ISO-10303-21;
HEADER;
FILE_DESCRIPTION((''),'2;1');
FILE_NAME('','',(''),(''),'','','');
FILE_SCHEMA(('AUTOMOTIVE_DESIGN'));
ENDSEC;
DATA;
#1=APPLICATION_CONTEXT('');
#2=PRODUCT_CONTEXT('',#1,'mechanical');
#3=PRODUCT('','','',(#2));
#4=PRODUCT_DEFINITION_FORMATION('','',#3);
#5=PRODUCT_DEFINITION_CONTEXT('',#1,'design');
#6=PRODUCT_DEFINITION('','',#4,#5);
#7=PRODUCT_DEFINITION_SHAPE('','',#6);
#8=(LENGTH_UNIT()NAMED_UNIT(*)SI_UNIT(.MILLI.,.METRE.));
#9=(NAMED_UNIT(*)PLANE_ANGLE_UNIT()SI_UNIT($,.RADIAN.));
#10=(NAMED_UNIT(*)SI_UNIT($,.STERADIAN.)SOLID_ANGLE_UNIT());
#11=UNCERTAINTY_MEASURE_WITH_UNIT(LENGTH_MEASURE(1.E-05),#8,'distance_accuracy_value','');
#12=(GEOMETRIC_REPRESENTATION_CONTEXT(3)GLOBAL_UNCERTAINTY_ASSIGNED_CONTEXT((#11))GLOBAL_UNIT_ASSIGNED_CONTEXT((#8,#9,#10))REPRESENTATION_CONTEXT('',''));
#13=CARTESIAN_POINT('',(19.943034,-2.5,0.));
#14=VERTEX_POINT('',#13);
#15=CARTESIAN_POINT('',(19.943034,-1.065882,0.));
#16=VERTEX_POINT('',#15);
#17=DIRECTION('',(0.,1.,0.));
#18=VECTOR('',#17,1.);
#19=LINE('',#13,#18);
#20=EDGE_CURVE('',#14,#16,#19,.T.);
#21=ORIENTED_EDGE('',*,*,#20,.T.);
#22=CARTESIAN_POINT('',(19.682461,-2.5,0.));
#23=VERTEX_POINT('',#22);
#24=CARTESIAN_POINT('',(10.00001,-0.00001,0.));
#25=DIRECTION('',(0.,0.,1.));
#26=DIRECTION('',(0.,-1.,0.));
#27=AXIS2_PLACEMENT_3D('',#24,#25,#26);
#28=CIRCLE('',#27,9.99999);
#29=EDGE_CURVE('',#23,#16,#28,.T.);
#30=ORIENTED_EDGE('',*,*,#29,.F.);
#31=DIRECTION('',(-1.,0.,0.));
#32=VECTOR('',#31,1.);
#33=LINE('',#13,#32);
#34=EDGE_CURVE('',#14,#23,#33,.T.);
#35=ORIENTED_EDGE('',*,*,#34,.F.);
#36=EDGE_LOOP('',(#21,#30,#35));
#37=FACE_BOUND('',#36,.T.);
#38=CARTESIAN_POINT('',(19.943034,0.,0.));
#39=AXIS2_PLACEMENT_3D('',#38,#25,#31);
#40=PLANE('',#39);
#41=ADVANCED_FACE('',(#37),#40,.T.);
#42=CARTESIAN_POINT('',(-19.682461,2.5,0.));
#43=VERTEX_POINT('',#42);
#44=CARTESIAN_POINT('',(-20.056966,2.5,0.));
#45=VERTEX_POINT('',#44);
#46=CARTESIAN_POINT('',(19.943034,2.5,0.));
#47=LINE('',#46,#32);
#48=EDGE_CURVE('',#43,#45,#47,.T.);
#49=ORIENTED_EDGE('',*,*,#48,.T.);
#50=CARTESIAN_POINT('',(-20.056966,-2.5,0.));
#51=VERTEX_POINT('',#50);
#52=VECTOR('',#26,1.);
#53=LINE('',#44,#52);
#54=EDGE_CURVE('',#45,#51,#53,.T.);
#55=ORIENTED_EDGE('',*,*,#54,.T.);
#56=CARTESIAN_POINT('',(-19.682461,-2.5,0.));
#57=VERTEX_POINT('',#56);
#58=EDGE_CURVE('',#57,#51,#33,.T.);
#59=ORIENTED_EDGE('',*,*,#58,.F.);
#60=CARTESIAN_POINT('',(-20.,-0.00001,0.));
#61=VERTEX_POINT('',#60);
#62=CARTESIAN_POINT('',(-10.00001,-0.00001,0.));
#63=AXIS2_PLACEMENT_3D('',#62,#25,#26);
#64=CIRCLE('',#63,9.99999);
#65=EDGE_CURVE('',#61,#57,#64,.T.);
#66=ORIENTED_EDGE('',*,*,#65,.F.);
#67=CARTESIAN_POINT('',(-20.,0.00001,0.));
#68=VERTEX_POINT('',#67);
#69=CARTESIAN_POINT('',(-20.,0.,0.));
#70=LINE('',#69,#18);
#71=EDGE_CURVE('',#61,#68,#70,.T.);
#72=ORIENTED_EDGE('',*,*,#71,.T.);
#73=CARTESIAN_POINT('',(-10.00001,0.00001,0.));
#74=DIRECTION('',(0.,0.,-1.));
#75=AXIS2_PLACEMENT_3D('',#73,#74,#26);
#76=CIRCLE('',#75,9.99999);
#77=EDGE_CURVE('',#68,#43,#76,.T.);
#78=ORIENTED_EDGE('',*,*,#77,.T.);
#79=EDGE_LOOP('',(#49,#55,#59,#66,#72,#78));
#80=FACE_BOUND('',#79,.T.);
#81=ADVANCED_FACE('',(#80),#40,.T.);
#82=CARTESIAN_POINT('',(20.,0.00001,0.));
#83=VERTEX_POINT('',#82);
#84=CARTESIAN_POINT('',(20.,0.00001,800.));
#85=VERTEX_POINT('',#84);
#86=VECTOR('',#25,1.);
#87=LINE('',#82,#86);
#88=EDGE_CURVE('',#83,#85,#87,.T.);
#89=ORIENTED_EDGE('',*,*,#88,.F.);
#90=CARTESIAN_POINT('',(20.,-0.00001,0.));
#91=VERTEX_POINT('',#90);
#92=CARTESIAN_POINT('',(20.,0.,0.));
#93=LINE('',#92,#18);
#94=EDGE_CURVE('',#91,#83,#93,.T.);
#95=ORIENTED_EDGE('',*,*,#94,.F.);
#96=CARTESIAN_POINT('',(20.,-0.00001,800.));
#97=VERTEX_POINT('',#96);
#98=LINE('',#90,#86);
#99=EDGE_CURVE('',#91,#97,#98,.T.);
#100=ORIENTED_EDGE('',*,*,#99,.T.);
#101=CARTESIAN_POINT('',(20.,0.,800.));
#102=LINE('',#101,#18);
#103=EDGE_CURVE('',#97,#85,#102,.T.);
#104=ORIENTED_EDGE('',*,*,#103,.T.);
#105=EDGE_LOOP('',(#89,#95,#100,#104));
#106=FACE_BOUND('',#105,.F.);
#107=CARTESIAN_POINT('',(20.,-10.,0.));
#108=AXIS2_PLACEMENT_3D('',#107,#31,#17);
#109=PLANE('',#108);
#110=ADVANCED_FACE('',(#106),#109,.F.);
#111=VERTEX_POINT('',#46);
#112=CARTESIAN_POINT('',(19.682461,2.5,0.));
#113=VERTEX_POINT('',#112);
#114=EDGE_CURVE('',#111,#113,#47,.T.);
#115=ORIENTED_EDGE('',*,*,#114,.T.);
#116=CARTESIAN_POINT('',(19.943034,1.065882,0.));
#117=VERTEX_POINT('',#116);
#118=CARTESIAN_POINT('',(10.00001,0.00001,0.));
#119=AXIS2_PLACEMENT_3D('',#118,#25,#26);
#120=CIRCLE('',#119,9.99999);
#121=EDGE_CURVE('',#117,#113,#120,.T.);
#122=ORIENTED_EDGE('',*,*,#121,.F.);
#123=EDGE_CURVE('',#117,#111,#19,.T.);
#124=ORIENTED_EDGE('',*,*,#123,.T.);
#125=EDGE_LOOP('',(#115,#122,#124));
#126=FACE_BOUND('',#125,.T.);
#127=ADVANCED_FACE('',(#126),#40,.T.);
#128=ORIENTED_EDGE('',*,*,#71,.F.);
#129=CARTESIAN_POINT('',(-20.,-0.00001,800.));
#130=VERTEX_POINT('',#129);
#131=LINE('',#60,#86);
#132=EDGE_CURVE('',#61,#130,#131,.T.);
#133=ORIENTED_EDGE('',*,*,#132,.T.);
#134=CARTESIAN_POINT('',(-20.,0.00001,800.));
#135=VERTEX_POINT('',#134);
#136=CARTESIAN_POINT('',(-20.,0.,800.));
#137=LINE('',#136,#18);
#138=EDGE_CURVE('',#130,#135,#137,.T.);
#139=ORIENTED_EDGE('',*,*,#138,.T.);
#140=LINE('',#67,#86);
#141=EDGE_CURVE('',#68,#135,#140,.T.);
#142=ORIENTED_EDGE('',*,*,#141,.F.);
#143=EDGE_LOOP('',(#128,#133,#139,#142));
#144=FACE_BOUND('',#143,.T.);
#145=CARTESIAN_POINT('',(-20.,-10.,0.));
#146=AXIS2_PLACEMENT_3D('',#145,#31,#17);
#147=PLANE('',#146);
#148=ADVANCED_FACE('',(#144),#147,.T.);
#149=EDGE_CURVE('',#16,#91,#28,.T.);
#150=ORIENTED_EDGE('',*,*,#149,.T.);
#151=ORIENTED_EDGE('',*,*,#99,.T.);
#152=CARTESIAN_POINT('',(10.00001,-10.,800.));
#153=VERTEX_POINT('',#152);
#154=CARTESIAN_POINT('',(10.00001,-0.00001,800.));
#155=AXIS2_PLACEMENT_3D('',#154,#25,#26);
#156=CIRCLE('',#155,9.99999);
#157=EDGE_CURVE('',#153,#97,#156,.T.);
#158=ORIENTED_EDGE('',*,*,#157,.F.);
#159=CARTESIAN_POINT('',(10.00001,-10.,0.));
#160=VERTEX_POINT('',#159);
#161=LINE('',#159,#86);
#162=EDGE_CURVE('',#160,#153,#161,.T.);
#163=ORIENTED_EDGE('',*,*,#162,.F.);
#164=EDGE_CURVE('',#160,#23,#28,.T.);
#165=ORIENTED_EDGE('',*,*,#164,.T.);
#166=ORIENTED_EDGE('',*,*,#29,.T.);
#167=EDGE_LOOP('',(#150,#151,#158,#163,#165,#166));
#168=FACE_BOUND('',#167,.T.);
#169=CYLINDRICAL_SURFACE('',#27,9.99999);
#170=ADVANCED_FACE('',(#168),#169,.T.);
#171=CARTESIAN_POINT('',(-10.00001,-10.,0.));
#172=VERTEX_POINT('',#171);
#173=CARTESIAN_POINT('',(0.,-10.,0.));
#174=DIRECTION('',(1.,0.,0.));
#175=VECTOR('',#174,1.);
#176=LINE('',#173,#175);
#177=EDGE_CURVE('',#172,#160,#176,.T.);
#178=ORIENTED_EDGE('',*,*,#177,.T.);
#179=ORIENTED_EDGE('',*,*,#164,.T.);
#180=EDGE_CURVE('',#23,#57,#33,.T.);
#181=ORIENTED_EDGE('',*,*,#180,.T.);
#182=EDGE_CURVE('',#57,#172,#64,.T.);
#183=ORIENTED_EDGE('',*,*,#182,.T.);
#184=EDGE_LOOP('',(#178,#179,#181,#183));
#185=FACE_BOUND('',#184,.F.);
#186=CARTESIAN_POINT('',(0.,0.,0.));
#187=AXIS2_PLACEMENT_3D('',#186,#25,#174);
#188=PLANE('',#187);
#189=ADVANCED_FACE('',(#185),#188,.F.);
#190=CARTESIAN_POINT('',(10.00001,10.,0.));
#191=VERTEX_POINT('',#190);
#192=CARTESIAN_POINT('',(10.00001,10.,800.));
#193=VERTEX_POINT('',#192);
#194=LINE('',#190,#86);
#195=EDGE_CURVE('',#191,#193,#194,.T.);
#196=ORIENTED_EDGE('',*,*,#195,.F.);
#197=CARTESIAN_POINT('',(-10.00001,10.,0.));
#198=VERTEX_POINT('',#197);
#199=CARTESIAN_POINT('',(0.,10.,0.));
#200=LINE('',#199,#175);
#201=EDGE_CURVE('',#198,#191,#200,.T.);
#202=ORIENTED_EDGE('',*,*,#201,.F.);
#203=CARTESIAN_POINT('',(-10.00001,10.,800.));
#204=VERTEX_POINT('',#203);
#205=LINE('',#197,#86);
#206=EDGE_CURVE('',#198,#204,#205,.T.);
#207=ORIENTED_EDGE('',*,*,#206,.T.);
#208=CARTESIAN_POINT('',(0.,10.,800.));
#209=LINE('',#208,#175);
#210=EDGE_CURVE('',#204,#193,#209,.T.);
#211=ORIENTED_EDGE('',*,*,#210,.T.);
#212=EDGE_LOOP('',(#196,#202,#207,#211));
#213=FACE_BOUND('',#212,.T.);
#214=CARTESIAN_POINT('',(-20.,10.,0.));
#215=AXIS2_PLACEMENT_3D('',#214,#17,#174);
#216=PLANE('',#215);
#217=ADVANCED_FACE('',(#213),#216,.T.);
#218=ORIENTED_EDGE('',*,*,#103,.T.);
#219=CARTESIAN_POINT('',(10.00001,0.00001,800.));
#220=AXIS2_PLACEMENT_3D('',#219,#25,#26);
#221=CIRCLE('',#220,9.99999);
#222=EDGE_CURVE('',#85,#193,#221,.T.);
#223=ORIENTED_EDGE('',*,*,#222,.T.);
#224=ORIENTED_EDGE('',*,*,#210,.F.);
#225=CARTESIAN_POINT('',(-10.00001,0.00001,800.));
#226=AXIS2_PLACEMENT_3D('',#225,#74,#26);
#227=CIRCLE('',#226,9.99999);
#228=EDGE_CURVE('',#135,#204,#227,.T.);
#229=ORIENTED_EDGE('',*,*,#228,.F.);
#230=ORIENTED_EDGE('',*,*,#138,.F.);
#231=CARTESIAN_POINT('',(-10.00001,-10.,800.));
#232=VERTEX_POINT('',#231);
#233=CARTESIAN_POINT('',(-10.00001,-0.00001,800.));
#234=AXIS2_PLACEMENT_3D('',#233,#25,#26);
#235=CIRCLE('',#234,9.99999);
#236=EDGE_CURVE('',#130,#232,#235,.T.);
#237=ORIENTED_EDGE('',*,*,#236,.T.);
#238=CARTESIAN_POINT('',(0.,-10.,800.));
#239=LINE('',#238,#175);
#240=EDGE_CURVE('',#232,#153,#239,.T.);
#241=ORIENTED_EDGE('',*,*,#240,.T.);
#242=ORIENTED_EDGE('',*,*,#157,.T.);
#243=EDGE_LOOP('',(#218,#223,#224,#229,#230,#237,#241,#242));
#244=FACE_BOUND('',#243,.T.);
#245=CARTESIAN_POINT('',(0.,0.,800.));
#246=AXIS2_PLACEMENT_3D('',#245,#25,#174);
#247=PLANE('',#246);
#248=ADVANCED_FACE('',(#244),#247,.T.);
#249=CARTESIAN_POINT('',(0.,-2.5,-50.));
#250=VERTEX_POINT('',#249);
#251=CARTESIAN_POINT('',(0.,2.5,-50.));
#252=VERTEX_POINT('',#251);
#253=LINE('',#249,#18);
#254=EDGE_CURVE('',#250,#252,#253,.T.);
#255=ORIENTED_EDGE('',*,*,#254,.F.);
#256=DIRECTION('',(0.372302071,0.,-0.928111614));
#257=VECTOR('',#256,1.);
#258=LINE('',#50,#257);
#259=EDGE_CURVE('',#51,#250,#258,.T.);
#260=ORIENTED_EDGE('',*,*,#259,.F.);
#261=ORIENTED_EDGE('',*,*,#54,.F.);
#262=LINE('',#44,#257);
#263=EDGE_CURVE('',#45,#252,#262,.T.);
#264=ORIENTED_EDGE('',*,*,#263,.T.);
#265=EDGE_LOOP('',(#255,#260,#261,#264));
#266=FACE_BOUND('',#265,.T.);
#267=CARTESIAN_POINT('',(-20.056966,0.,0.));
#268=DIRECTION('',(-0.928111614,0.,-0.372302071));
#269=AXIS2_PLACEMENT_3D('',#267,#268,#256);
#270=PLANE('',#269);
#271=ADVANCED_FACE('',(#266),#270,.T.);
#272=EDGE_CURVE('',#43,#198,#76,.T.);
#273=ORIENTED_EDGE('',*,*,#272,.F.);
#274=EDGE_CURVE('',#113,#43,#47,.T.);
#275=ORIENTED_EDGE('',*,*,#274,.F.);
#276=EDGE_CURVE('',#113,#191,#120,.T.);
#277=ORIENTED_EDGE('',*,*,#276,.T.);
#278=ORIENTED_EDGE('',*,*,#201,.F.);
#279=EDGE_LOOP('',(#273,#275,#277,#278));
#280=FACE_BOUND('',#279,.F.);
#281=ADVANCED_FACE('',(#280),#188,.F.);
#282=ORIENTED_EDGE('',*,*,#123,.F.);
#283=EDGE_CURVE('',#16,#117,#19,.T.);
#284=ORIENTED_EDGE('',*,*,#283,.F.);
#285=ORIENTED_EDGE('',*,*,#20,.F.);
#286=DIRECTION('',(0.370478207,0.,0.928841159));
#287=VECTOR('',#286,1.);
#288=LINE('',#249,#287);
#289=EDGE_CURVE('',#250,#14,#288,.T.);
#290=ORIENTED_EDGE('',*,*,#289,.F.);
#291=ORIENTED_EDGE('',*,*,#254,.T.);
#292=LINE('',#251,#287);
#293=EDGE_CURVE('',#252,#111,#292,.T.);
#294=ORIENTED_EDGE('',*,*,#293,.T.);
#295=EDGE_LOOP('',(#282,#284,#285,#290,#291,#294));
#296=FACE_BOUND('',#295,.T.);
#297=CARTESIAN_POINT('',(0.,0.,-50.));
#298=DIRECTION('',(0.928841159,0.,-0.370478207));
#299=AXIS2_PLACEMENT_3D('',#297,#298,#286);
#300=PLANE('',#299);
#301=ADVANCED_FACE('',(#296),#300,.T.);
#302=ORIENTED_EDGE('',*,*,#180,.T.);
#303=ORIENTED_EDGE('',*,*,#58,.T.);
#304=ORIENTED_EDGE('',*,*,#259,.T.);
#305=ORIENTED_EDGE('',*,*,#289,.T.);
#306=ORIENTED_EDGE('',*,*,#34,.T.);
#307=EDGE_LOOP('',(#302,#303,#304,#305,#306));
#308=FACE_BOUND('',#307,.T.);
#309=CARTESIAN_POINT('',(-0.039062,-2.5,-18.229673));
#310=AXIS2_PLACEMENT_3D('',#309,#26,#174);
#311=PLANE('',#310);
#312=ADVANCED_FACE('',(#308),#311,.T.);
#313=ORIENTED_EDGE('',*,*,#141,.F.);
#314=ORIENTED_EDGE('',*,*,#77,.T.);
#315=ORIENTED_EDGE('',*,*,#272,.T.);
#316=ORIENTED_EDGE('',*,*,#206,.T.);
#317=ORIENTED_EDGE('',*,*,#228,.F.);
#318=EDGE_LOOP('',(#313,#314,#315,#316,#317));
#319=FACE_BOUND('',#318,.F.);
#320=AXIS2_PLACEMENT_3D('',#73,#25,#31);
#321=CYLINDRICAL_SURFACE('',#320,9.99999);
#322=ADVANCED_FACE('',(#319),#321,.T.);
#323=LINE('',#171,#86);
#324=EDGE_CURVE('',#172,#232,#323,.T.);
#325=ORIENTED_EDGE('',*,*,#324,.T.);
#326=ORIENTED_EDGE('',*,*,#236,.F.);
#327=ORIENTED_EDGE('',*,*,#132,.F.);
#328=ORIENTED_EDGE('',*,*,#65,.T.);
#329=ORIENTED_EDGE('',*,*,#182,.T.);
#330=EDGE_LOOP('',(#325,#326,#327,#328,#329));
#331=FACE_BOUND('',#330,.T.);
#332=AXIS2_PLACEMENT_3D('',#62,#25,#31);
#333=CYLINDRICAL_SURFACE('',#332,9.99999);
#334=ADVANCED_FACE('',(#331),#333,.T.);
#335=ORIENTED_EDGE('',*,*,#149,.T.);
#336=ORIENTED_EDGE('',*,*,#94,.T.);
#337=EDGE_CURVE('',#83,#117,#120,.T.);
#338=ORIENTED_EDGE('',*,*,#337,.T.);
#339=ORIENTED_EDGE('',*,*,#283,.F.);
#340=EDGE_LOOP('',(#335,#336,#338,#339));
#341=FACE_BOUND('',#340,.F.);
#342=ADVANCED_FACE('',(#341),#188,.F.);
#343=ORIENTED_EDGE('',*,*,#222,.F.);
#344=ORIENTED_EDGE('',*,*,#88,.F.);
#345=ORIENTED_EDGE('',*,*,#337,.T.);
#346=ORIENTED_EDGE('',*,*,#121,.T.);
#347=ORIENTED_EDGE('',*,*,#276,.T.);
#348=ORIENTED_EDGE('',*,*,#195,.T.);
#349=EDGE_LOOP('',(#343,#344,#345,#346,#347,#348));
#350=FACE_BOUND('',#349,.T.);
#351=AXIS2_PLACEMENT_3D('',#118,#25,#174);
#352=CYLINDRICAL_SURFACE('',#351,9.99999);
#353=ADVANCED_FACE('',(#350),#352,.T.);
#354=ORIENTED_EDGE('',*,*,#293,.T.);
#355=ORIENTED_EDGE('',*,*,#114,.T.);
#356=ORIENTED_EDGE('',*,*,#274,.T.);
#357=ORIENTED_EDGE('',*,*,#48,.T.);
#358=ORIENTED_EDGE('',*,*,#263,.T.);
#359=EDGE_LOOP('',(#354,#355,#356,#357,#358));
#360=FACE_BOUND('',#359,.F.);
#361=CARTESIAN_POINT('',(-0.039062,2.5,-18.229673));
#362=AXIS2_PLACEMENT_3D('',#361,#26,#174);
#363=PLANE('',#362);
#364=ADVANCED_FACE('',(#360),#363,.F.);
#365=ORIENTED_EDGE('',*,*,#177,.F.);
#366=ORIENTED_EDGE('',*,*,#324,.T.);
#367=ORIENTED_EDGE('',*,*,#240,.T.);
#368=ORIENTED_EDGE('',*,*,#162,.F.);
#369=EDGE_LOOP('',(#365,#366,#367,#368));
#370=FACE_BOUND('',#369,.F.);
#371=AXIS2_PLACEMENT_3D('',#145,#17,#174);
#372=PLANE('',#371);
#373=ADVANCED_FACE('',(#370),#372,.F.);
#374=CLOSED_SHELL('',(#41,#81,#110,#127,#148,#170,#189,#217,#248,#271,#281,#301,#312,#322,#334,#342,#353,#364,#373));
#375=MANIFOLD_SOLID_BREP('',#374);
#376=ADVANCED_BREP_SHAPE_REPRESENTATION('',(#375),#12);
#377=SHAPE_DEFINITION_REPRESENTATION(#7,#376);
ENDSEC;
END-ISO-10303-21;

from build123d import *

# Parameters (mm, degrees)
F0_W     = 40
F0_H     = 20
F1_DEPTH = 800
F2_R     = 9.99999
F4_DEPTH = 2.5


# Not quite as in the source:
# - a fillet or chamfer is up to 0.001 mm smaller than in the source, because OpenCascade refuses the exact size


with BuildPart() as f1:
    # F0 (on Top) → F1 (new body)
    with BuildSketch(Plane.XY):
        Rectangle(F0_W, F0_H)
    extrude(amount=F1_DEPTH)

    # F2 (radius 10 in the source; OpenCascade refuses exactly that, so slightly less here)
    f2_edges = [f1.edges().sort_by_distance(p)[0] for p in [
        (20, -10, 400),
        (20, 10, 400),
        (-20, -10, 400),
        (-20, 10, 400),
    ]]
    fillet(f2_edges, radius=F2_R)

    # F3 (on Front) → F4 (join, symmetric)
    with BuildSketch(Plane.XZ):
        Polygon((19.9430335092, 0), (-20.0569664908, 0), (0, -50), align=None)
    extrude(amount=F4_DEPTH, both=True)


solid = f1.part
